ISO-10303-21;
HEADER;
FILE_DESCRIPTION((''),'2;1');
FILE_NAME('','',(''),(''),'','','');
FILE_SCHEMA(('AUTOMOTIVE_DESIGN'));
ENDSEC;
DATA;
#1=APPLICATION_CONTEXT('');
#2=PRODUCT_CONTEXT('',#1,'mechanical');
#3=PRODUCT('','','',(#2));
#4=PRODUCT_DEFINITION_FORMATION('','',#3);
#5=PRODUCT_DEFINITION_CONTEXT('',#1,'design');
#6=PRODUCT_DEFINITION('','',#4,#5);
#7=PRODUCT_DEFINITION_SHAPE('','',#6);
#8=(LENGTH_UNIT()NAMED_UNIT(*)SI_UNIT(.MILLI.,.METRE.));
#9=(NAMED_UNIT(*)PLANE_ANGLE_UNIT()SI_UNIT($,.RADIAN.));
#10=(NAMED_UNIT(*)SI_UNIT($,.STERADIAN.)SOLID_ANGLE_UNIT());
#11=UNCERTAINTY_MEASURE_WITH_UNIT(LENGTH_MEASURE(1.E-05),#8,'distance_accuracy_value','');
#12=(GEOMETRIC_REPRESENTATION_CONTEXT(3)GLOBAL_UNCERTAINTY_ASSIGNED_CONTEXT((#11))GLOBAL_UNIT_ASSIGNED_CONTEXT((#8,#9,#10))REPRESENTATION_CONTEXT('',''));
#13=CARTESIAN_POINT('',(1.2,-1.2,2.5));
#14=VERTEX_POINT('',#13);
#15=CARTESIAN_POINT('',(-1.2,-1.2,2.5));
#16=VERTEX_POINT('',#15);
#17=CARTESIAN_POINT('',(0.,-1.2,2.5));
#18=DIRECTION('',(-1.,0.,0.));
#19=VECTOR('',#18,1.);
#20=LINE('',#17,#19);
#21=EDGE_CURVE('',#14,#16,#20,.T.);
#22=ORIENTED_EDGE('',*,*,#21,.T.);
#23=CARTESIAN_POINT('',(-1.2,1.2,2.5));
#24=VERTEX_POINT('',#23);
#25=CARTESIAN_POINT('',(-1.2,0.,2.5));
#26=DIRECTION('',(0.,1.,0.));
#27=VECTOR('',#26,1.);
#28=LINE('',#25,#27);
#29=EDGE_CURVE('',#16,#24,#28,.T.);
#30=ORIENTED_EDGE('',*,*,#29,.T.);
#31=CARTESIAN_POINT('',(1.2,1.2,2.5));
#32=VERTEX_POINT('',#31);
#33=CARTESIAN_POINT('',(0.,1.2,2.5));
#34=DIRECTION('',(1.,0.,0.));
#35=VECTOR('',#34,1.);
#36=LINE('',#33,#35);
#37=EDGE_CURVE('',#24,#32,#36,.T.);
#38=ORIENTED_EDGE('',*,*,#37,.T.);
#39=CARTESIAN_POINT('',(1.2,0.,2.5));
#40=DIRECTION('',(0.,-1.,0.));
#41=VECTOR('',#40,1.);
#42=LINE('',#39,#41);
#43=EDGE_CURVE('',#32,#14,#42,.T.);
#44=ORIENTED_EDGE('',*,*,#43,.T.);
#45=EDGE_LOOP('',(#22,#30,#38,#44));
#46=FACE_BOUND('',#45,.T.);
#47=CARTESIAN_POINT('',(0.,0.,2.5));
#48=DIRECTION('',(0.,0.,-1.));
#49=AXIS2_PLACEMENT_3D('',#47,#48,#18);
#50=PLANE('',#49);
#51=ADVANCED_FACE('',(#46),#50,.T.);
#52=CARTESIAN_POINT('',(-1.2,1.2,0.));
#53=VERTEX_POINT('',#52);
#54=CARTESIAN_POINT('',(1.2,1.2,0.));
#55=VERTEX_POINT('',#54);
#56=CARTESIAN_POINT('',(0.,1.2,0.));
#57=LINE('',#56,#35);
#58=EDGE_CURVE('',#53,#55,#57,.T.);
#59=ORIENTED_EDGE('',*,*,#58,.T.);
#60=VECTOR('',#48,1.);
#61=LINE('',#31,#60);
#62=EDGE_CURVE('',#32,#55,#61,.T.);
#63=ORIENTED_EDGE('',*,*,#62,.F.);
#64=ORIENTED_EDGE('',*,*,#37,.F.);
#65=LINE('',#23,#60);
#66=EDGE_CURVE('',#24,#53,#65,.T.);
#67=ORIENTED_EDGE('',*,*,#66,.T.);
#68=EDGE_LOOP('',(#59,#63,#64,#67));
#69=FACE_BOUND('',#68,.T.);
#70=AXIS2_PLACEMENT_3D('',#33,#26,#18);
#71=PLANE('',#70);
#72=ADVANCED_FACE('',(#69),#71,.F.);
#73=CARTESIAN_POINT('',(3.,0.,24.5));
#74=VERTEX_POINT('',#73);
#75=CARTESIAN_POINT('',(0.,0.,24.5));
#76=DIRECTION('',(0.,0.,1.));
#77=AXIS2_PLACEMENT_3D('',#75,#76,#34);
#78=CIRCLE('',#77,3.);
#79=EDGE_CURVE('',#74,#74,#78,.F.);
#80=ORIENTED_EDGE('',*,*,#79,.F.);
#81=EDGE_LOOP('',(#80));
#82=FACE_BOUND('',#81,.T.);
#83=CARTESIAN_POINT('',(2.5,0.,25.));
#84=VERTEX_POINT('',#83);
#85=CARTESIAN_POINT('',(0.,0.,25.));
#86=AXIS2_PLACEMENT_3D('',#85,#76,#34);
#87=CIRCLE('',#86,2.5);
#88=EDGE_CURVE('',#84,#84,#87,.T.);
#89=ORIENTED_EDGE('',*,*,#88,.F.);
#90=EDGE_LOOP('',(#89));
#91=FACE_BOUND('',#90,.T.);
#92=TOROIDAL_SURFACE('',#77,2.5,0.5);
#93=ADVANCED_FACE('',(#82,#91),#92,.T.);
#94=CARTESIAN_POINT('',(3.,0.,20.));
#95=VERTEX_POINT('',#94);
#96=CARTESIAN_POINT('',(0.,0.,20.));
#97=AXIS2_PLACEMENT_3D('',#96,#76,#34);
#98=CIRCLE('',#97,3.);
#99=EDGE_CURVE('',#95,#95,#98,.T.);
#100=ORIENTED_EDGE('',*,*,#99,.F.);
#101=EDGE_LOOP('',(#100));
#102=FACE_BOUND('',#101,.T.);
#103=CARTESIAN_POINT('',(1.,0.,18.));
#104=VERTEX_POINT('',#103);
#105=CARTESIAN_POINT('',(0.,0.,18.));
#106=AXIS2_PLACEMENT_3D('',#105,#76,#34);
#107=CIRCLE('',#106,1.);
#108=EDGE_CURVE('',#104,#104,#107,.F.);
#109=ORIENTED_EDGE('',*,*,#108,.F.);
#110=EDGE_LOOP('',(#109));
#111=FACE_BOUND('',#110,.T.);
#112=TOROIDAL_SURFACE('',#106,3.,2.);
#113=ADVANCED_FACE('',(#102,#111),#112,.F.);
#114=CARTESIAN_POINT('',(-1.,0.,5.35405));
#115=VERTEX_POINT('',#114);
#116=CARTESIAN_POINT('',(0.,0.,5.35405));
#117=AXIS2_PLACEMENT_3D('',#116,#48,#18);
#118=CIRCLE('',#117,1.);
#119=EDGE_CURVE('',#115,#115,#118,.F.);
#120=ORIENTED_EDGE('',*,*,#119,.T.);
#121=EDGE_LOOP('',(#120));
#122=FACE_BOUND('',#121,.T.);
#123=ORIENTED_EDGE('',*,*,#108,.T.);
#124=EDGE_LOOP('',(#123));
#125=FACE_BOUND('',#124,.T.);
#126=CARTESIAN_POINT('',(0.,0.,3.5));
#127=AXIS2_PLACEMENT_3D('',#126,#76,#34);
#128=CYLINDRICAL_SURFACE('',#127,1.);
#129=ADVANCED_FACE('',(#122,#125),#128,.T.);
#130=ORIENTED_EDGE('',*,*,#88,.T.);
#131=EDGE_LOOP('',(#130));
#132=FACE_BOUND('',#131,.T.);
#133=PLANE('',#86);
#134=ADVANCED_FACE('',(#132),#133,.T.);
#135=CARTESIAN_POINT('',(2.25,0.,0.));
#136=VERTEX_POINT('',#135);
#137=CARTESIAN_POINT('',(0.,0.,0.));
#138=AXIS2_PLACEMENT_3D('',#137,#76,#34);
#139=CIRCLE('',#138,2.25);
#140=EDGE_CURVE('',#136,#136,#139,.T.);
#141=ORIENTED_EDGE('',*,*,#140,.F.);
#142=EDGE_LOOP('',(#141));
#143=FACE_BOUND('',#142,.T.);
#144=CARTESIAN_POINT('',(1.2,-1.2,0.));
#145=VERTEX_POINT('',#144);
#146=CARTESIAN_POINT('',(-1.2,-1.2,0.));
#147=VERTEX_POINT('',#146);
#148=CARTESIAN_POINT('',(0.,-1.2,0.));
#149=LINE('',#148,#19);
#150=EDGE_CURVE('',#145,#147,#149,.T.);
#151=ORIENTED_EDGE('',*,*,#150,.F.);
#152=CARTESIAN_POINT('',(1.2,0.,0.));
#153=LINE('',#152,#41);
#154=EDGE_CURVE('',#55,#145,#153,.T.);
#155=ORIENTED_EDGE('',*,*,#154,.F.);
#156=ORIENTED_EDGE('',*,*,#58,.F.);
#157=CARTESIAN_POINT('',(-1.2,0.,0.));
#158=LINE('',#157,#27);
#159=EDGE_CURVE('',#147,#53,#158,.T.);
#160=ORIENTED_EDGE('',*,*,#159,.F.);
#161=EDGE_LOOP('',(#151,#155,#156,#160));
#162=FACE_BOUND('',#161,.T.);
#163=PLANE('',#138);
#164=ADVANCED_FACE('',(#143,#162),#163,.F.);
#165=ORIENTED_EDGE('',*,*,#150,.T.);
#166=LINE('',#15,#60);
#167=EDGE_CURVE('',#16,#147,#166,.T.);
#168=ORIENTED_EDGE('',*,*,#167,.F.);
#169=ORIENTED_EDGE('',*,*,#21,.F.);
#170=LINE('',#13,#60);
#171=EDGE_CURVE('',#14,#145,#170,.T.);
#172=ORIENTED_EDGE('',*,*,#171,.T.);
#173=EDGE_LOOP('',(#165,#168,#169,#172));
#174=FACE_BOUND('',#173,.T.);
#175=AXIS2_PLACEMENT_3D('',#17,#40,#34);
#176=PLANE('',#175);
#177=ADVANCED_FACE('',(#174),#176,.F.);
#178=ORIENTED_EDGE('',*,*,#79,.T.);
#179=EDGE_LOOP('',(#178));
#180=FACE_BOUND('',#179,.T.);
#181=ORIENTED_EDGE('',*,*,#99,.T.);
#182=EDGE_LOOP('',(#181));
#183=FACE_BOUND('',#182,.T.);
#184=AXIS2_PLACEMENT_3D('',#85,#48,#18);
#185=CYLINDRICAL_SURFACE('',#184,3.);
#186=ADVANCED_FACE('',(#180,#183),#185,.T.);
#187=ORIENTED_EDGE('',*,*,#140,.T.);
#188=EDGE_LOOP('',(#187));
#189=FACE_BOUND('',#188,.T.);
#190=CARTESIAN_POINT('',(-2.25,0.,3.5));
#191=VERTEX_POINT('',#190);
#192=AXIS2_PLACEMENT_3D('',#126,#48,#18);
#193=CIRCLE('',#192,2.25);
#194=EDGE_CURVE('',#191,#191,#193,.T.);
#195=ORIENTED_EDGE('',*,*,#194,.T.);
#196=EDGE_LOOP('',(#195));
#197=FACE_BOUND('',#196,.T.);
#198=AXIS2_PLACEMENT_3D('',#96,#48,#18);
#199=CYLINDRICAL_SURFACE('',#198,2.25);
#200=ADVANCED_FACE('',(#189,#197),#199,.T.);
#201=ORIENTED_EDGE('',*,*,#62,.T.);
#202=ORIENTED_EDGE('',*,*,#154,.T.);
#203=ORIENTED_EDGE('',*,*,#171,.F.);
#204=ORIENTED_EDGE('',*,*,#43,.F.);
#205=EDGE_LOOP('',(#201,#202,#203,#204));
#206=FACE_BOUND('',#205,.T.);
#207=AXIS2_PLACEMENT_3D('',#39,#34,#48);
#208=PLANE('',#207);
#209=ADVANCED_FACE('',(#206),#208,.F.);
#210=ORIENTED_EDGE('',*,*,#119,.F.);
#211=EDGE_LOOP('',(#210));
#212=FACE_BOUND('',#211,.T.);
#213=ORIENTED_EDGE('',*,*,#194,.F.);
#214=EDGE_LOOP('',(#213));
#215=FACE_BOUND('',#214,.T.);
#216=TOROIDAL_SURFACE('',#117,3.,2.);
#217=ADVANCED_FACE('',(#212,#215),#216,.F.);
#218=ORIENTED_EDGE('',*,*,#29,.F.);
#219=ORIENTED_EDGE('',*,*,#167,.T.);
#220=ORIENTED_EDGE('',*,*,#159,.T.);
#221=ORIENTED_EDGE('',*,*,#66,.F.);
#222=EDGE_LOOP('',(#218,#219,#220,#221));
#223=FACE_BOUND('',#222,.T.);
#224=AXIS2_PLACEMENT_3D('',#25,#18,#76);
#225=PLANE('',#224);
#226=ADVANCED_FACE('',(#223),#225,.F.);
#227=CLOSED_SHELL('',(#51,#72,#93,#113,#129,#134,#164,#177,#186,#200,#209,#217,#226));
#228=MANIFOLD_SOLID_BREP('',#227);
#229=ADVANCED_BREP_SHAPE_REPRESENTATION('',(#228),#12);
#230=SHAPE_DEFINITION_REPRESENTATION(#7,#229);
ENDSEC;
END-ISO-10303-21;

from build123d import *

# Parameters (mm, degrees)
SKETCH_1_R          = 2.25
EXTRUDE_2_DEPTH     = 20
SKETCH_7_W          = 2.4
SKETCH_7_H          = 2.4
CUT_EXTRUDE_3_DEPTH = 2.5
SKETCH_9_R          = 3
EXTRUDE_4_DEPTH     = 5
CUT_EXTRUDE_START   = -20
SKETCH_12_OUTSIDE_W = 13.28
SKETCH_12_OUTSIDE_H = 13.28
SKETCH_12_OUTSIDE_R = 1
CUT_EXTRUDE_4_DEPTH = 16.5
FILLET_2_R          = 2
FILLET_3_R          = 0.5


with BuildPart() as part:
    # 草图1 → 凸台-拉伸2 (new body)
    with BuildSketch(Plane.XY):
        Circle(SKETCH_1_R)
    extrude(amount=EXTRUDE_2_DEPTH)

    # 草图7 → 切除-拉伸3 (cut)
    with BuildSketch(Plane.XY):
        Rectangle(SKETCH_7_W, SKETCH_7_H)
    extrude(amount=CUT_EXTRUDE_3_DEPTH, mode=Mode.SUBTRACT)

    # 草图9 → 凸台-拉伸4 (add)
    with BuildSketch(Plane.XY.offset(20)):
        Circle(SKETCH_9_R)
    extrude(amount=EXTRUDE_4_DEPTH)

    # 草图12 outside → 切除-拉伸4 (cut)
    with BuildSketch(Plane(origin=(0, 0, 0), x_dir=(-1, 0, 0), z_dir=(0, 0, -1)).offset(CUT_EXTRUDE_START)):
        Rectangle(SKETCH_12_OUTSIDE_W, SKETCH_12_OUTSIDE_H)
        with Locations(Location((0, 0, 0), (0, 0, 180))):
            Circle(SKETCH_12_OUTSIDE_R, mode=Mode.SUBTRACT)
    extrude(amount=CUT_EXTRUDE_4_DEPTH, mode=Mode.SUBTRACT)

    # 圆角2
    # the kernel refuses this fillet: 2 mm, written as the material it adds along each edge
    with BuildSketch(Plane(origin=(0, 0, 3.5), x_dir=(1, 0, 0), z_dir=(0, 1, 0))) as fillet_2_piece_1:
        with BuildLine():
            CenterArc((3, -1.854049622), FILLET_2_R, 112.024312837, 67.975687163)
            Line((2.25, 0), (2.235, 0.037080992))
            ThreePointArc((2.235, 0.037080992), (1.625, 0.04), (1, 0.04))
            Line((1, 0.04), (0.96, 0))
            Line((0.96, 0), (0.96, -1.854049622))
            Line((0.96, -1.854049622), (1, -1.854049622))
        make_face()
    revolve(axis=Axis((0, 0, 3.5), (0, 0, -1)))
    with BuildSketch(Plane(origin=(0, 0, 20), x_dir=(1, 0, 0), z_dir=(0, 1, 0))) as fillet_2_piece_2:
        with BuildLine():
            CenterArc((1 + FILLET_2_R, FILLET_2_R), FILLET_2_R, 180, 90)
            Line((1, FILLET_2_R), (1 - FILLET_2_R * 0.02, FILLET_2_R))
            Line((1 - FILLET_2_R * 0.02, FILLET_2_R), (1 - FILLET_2_R * 0.02, -FILLET_2_R * 0.02))
            Line((1 - FILLET_2_R * 0.02, -FILLET_2_R * 0.02), (1 + FILLET_2_R, -FILLET_2_R * 0.02))
            Line((1 + FILLET_2_R, -FILLET_2_R * 0.02), (1 + FILLET_2_R, 0))
        make_face()
    revolve(axis=Axis((0, 0, 20), (0, 0, -1)))

    # 圆角3
    fillet_3_edges = [part.edges().sort_by_distance(p)[0] for p in [
        (-3, 0, 25),
    ]]
    fillet(fillet_3_edges, radius=FILLET_3_R)


solid = part.part
